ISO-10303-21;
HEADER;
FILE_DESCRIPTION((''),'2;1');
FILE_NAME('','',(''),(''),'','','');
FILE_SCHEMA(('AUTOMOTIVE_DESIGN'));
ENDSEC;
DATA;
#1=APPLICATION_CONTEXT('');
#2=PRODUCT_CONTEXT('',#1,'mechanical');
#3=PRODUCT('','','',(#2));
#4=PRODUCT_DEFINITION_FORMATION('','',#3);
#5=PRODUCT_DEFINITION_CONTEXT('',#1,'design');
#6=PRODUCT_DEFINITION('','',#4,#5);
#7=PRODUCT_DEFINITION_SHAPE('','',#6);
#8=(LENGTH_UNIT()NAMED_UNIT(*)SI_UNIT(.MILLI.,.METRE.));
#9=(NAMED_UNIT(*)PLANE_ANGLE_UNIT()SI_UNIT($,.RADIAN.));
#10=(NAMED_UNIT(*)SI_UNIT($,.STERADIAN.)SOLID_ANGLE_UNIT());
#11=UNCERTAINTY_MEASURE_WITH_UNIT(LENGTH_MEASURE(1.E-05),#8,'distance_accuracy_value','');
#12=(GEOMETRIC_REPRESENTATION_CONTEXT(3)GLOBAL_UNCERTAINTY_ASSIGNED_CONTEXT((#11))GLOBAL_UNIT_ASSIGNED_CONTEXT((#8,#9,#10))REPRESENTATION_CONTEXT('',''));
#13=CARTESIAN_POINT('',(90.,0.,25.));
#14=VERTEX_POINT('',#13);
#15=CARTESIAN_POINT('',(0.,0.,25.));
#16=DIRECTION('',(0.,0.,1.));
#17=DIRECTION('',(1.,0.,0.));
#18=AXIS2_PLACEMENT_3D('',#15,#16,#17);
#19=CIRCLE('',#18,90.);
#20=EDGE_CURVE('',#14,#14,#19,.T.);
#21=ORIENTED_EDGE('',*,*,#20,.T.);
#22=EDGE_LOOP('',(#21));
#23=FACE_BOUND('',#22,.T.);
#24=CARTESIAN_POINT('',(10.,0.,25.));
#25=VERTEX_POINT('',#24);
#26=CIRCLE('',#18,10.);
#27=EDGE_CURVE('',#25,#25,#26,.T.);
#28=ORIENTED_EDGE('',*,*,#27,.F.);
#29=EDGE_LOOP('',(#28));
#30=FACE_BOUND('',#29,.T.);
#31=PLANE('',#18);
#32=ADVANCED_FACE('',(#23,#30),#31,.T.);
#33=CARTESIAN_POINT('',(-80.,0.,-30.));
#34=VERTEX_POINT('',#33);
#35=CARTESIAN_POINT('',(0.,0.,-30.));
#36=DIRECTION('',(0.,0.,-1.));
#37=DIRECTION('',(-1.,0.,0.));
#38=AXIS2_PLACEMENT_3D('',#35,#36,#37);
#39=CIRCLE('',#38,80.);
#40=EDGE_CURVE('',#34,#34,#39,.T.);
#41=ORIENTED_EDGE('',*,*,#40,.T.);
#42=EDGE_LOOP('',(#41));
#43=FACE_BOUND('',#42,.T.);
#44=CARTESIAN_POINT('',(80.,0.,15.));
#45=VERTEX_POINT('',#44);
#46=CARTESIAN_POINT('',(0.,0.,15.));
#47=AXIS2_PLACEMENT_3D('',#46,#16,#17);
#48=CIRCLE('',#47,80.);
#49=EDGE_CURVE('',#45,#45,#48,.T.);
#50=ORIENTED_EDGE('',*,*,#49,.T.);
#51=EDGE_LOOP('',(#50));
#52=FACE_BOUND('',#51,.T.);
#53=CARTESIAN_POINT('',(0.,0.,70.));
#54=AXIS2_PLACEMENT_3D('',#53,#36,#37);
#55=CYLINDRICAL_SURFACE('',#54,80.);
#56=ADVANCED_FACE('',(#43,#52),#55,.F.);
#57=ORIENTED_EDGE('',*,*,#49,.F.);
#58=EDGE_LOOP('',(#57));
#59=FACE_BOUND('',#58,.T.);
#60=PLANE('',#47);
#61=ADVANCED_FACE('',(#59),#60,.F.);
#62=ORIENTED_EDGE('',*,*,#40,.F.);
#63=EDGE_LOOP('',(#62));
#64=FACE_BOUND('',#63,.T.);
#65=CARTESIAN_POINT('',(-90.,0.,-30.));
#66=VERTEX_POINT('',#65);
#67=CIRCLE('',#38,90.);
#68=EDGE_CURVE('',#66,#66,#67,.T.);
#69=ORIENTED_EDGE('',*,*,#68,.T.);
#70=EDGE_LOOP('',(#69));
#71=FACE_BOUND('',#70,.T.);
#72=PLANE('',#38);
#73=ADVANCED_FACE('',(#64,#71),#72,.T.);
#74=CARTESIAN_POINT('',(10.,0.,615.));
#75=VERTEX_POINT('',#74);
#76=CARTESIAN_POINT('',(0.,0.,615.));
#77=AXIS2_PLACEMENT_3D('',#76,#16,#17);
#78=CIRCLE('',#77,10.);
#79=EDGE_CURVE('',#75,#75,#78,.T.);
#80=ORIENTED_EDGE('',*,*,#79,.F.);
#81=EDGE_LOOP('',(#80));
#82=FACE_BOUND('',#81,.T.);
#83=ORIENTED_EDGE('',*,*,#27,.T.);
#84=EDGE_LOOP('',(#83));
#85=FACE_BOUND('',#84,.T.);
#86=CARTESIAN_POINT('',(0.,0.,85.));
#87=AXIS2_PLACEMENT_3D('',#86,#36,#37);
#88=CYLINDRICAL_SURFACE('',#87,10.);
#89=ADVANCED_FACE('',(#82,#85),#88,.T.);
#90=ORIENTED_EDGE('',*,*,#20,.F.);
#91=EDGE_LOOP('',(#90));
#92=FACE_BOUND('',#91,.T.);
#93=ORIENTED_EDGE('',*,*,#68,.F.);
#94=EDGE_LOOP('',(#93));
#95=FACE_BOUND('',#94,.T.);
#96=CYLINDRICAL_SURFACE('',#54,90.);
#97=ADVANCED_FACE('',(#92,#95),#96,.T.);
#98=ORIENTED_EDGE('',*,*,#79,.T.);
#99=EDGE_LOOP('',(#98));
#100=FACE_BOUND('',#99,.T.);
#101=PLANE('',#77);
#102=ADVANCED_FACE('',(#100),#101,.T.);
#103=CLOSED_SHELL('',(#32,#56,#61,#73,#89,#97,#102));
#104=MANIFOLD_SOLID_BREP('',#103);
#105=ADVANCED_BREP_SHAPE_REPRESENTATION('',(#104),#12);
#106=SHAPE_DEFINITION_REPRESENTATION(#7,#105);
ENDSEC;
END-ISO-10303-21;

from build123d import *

# Parameters (mm, degrees)
SKETCH1_R                = 88
BOSS_EXTRUDE3_DEPTH      = 25
SKETCH4_W                = 10.4719
SKETCH4_H                = 13.351164338
BOSS_EXTRUDE4_DEPTH      = 25
FILLET2_R                = 4
CIRPATTERN1_COUNT        = 30
FILLET2_OF_CIRPATTERN1_R = 4
SKETCH6_R                = 10
BOSS_EXTRUDE5_DEPTH      = 60
BOSS_EXTRUDE6_START      = 10
SKETCH7_R                = 10
BOSS_EXTRUDE6_DEPTH      = 10
SKETCH8_R                = 10
BOSS_EXTRUDE7_DEPTH      = 10
SKETCH9_R                = 10
BOSS_EXTRUDE8_DEPTH      = 25
SKETCH10_R               = 10
BOSS_EXTRUDE9_DEPTH      = 42.5
SKETCH12_R               = 12.5
CUT_EXTRUDE1_DEPTH       = 12
CUT_EXTRUDE2_START       = -55.5
SKETCH13_R               = 10
CUT_EXTRUDE2_DEPTH       = 55.5
SKETCH14_R               = 10
BOSS_EXTRUDE10_DEPTH     = 440
SKETCH15_R               = 105
BOSS_EXTRUDE12_DEPTH     = 25
BOSS_EXTRUDE13_START     = 30
SKETCH16_R               = 105
BOSS_EXTRUDE13_DEPTH     = 30
SKETCH17_R               = 10
BOSS_EXTRUDE14_DEPTH     = 50
SKETCH18_R               = 10
BOSS_EXTRUDE15_DEPTH     = 30
SKETCH19_R               = 105
SKETCH19_R_2             = 90
CUT_EXTRUDE3_DEPTH       = 100
SHELL3_START             = -30
SHELL3_OUTLINE_R         = 80
SHELL3_DEPTH             = 45


# Read off the part's stored shape, not the designer's step: Shell3
with BuildPart() as part:
    # Sketch1 → Boss-Extrude3 (new body)
    with BuildSketch(Plane.XY):
        Circle(SKETCH1_R)
    extrude(amount=BOSS_EXTRUDE3_DEPTH)

    # Sketch4 → Boss-Extrude4 (add)
    with BuildSketch(Plane.XY.offset(25)):
        with Locations((0, 93.324417831)):
            Rectangle(SKETCH4_W, SKETCH4_H)
    boss_extrude4 = extrude(amount=-BOSS_EXTRUDE4_DEPTH)

    # Fillet2
    fillet2_edges = [part.edges().sort_by_distance(p)[0] for p in [
        (5.23595, 100, 12.5),
        (0, 100, 0),
        (-5.23595, 100, 12.5),
        (0, 100, 25),
    ]]
    fillet(fillet2_edges, radius=FILLET2_R)

    # CirPattern1: Boss-Extrude4 ×30 about axis
    cirpattern1_axis = Axis((0, 0.317667884, 0), (0, 0, 1))
    for i in range(1, CIRPATTERN1_COUNT):
        add(boss_extrude4.rotate(cirpattern1_axis, i * 360 / CIRPATTERN1_COUNT))

    # Fillet2 of CirPattern1
    fillet2_of_cirpattern1_edges = [part.edges().sort_by_distance(p)[0] for p in [
        (-15.603590285, 98.910317096, 12.5),
        (-20.725122215, 97.821701879, 0),
        (-25.846654145, 96.733086661, 12.5),
        (-20.725122215, 97.821701879, 25),
        (-35.7611788, 93.511662322, 12.5),
        (-40.544457139, 91.382009596, 0),
        (-45.327735478, 89.252356869, 12.5),
        (-40.544457139, 91.382009596, 25),
        (-54.3558322, 84.039982796, 12.5),
        (-58.591804732, 80.962368605, 0),
        (-62.827777264, 77.884754413, 12.5),
        (-58.591804732, 80.962368605, 25),
        (-70.574874905, 70.909236365, 12.5),
        (-74.078409304, 67.018167216, 0),
        (-77.581943702, 63.127098067, 12.5),
        (-74.078409304, 67.018167216, 25),
        (-83.709456921, 54.693299655, 12.5),
        (-86.327431921, 50.158833942, 0),
        (-88.945406921, 45.624368229, 12.5),
        (-86.327431921, 50.158833942, 25),
        (-93.185533987, 36.100886913, 12.5),
        (-94.803531519, 31.121202547, 0),
        (-96.42152905, 26.14151818, 12.5),
        (-94.803531519, 31.121202547, 25),
        (-98.588956064, 15.944575793, 12.5),
        (-99.136261871, 10.737308875, 0),
        (-99.683567678, 5.530041957, 12.5),
        (-99.136261871, 10.737308875, 25),
        (-99.683567678, -4.894706189, 12.5),
        (-99.136261871, -10.101973107, 0),
        (-98.588956064, -15.309240025, 12.5),
        (-99.136261871, -10.101973107, 25),
        (-96.42152905, -25.506182413, 12.5),
        (-94.803531519, -30.485866779, 0),
        (-93.185533987, -35.465551145, 12.5),
        (-94.803531519, -30.485866779, 25),
        (-88.945406921, -44.989032461, 12.5),
        (-86.327431921, -49.523498174, 0),
        (-83.709456921, -54.057963887, 12.5),
        (-86.327431921, -49.523498174, 25),
        (-77.581943702, -62.491762299, 12.5),
        (-74.078409304, -66.382831448, 0),
        (-70.574874905, -70.273900597, 12.5),
        (-74.078409304, -66.382831448, 25),
        (-62.827777264, -77.249418645, 12.5),
        (-58.591804732, -80.327032837, 0),
        (-54.3558322, -83.404647029, 12.5),
        (-58.591804732, -80.327032837, 25),
        (-45.327735478, -88.617021102, 12.5),
        (-40.544457139, -90.746673828, 0),
        (-35.7611788, -92.876326554, 12.5),
        (-40.544457139, -90.746673828, 25),
        (-25.846654145, -96.097750894, 12.5),
        (-20.725122215, -97.186366111, 0),
        (-15.603590285, -98.274981329, 12.5),
        (-20.725122215, -97.186366111, 25),
        (-5.23595, -99.364664232, 12.5),
        (0, -99.364664232, 0),
        (5.23595, -99.364664232, 12.5),
        (0, -99.364664232, 25),
        (15.603590285, -98.274981329, 12.5),
        (20.725122215, -97.186366111, 0),
        (25.846654145, -96.097750894, 12.5),
        (20.725122215, -97.186366111, 25),
        (35.7611788, -92.876326554, 12.5),
        (40.544457139, -90.746673828, 0),
        (45.327735478, -88.617021102, 12.5),
        (40.544457139, -90.746673828, 25),
        (54.3558322, -83.404647029, 12.5),
        (58.591804732, -80.327032837, 0),
        (62.827777264, -77.249418645, 12.5),
        (58.591804732, -80.327032837, 25),
        (70.574874905, -70.273900597, 12.5),
        (74.078409304, -66.382831448, 0),
        (77.581943702, -62.491762299, 12.5),
        (74.078409304, -66.382831448, 25),
        (83.709456921, -54.057963887, 12.5),
        (86.327431921, -49.523498174, 0),
        (88.945406921, -44.989032461, 12.5),
        (86.327431921, -49.523498174, 25),
        (93.185533987, -35.465551145, 12.5),
        (94.803531519, -30.485866779, 0),
        (96.42152905, -25.506182413, 12.5),
        (94.803531519, -30.485866779, 25),
        (98.588956064, -15.309240025, 12.5),
        (99.136261871, -10.101973107, 0),
        (99.683567678, -4.894706189, 12.5),
        (99.136261871, -10.101973107, 25),
        (99.683567678, 5.530041957, 12.5),
        (99.136261871, 10.737308875, 0),
        (98.588956064, 15.944575793, 12.5),
        (99.136261871, 10.737308875, 25),
        (96.42152905, 26.14151818, 12.5),
        (94.803531519, 31.121202547, 0),
        (93.185533987, 36.100886913, 12.5),
        (94.803531519, 31.121202547, 25),
        (88.945406921, 45.624368229, 12.5),
        (86.327431921, 50.158833942, 0),
        (83.709456921, 54.693299655, 12.5),
        (86.327431921, 50.158833942, 25),
        (77.581943702, 63.127098067, 12.5),
        (74.078409304, 67.018167216, 0),
        (70.574874905, 70.909236365, 12.5),
        (74.078409304, 67.018167216, 25),
        (62.827777264, 77.884754413, 12.5),
        (58.591804732, 80.962368605, 0),
        (54.3558322, 84.039982796, 12.5),
        (58.591804732, 80.962368605, 25),
        (45.327735478, 89.252356869, 12.5),
        (40.544457139, 91.382009596, 0),
        (35.7611788, 93.511662322, 12.5),
        (40.544457139, 91.382009596, 25),
        (25.846654145, 96.733086661, 12.5),
        (20.725122215, 97.821701879, 0),
        (15.603590285, 98.910317096, 12.5),
        (20.725122215, 97.821701879, 25),
    ]]
    fillet(fillet2_of_cirpattern1_edges, radius=FILLET2_OF_CIRPATTERN1_R)

    # Sketch6 → Boss-Extrude5 (add)
    with BuildSketch(Plane.XY.offset(25)):
        Circle(SKETCH6_R)
    extrude(amount=BOSS_EXTRUDE5_DEPTH)

    # Sketch7 → Boss-Extrude6 (add)
    with BuildSketch(Plane(origin=(0, 0, 0), x_dir=(-1, 0, 0), z_dir=(0, 0, -1)).offset(BOSS_EXTRUDE6_START)):
        with Locations(Location((0, 0, 0), (0, 0, 180))):
            Circle(SKETCH7_R)
    extrude(amount=-BOSS_EXTRUDE6_DEPTH)

    # Sketch8 → Boss-Extrude7 (add)
    with BuildSketch(Plane.XY.offset(85)):
        Circle(SKETCH8_R)
    extrude(amount=BOSS_EXTRUDE7_DEPTH)

    # Sketch9 → Boss-Extrude8 (add)
    with BuildSketch(Plane.XY.offset(95)):
        Circle(SKETCH9_R)
    extrude(amount=BOSS_EXTRUDE8_DEPTH)

    # Sketch10 → Boss-Extrude9 (add)
    with BuildSketch(Plane.XY.offset(120)):
        Circle(SKETCH10_R)
    extrude(amount=BOSS_EXTRUDE9_DEPTH)

    # Sketch12 → Cut-Extrude1 (cut)
    with BuildSketch(Plane.XY.offset(162.5)):
        Circle(SKETCH12_R)
    extrude(amount=-CUT_EXTRUDE1_DEPTH, mode=Mode.SUBTRACT)

    # Sketch13 → Cut-Extrude2 (cut)
    with BuildSketch(Plane.XY.offset(150.5).offset(CUT_EXTRUDE2_START)):
        Circle(SKETCH13_R)
    extrude(amount=CUT_EXTRUDE2_DEPTH, mode=Mode.SUBTRACT)

    # Sketch14 → Boss-Extrude10 (add)
    with BuildSketch(Plane.XY.offset(95)):
        Circle(SKETCH14_R)
    extrude(amount=BOSS_EXTRUDE10_DEPTH)

    # Sketch15 → Boss-Extrude12 (add)
    with BuildSketch(Plane(origin=(0, 0, 0), x_dir=(-1, 0, 0), z_dir=(0, 0, -1))):
        Circle(SKETCH15_R)
    extrude(amount=-BOSS_EXTRUDE12_DEPTH)

    # Sketch16 → Boss-Extrude13 (add)
    with BuildSketch(Plane(origin=(0, 0, 0), x_dir=(-1, 0, 0), z_dir=(0, 0, -1)).offset(BOSS_EXTRUDE13_START)):
        Circle(SKETCH16_R)
    extrude(amount=-BOSS_EXTRUDE13_DEPTH)

    # Sketch17 → Boss-Extrude14 (add)
    with BuildSketch(Plane.XY.offset(535)):
        Circle(SKETCH17_R)
    extrude(amount=BOSS_EXTRUDE14_DEPTH)

    # Sketch18 → Boss-Extrude15 (add)
    with BuildSketch(Plane.XY.offset(585)):
        Circle(SKETCH18_R)
    extrude(amount=BOSS_EXTRUDE15_DEPTH)

    # Sketch19 → Cut-Extrude3 (cut)
    with BuildSketch(Plane(origin=(0, 0, -30), x_dir=(-1, 0, 0), z_dir=(0, 0, -1))):
        Circle(SKETCH19_R)
        Circle(SKETCH19_R_2, mode=Mode.SUBTRACT)
    extrude(amount=-CUT_EXTRUDE3_DEPTH, mode=Mode.SUBTRACT)

    # Shell3 outline → Shell3 (cut)
    with BuildSketch(Plane.XY.offset(SHELL3_START)):
        Circle(SHELL3_OUTLINE_R)
    extrude(amount=SHELL3_DEPTH, mode=Mode.SUBTRACT)


solid = part.part
